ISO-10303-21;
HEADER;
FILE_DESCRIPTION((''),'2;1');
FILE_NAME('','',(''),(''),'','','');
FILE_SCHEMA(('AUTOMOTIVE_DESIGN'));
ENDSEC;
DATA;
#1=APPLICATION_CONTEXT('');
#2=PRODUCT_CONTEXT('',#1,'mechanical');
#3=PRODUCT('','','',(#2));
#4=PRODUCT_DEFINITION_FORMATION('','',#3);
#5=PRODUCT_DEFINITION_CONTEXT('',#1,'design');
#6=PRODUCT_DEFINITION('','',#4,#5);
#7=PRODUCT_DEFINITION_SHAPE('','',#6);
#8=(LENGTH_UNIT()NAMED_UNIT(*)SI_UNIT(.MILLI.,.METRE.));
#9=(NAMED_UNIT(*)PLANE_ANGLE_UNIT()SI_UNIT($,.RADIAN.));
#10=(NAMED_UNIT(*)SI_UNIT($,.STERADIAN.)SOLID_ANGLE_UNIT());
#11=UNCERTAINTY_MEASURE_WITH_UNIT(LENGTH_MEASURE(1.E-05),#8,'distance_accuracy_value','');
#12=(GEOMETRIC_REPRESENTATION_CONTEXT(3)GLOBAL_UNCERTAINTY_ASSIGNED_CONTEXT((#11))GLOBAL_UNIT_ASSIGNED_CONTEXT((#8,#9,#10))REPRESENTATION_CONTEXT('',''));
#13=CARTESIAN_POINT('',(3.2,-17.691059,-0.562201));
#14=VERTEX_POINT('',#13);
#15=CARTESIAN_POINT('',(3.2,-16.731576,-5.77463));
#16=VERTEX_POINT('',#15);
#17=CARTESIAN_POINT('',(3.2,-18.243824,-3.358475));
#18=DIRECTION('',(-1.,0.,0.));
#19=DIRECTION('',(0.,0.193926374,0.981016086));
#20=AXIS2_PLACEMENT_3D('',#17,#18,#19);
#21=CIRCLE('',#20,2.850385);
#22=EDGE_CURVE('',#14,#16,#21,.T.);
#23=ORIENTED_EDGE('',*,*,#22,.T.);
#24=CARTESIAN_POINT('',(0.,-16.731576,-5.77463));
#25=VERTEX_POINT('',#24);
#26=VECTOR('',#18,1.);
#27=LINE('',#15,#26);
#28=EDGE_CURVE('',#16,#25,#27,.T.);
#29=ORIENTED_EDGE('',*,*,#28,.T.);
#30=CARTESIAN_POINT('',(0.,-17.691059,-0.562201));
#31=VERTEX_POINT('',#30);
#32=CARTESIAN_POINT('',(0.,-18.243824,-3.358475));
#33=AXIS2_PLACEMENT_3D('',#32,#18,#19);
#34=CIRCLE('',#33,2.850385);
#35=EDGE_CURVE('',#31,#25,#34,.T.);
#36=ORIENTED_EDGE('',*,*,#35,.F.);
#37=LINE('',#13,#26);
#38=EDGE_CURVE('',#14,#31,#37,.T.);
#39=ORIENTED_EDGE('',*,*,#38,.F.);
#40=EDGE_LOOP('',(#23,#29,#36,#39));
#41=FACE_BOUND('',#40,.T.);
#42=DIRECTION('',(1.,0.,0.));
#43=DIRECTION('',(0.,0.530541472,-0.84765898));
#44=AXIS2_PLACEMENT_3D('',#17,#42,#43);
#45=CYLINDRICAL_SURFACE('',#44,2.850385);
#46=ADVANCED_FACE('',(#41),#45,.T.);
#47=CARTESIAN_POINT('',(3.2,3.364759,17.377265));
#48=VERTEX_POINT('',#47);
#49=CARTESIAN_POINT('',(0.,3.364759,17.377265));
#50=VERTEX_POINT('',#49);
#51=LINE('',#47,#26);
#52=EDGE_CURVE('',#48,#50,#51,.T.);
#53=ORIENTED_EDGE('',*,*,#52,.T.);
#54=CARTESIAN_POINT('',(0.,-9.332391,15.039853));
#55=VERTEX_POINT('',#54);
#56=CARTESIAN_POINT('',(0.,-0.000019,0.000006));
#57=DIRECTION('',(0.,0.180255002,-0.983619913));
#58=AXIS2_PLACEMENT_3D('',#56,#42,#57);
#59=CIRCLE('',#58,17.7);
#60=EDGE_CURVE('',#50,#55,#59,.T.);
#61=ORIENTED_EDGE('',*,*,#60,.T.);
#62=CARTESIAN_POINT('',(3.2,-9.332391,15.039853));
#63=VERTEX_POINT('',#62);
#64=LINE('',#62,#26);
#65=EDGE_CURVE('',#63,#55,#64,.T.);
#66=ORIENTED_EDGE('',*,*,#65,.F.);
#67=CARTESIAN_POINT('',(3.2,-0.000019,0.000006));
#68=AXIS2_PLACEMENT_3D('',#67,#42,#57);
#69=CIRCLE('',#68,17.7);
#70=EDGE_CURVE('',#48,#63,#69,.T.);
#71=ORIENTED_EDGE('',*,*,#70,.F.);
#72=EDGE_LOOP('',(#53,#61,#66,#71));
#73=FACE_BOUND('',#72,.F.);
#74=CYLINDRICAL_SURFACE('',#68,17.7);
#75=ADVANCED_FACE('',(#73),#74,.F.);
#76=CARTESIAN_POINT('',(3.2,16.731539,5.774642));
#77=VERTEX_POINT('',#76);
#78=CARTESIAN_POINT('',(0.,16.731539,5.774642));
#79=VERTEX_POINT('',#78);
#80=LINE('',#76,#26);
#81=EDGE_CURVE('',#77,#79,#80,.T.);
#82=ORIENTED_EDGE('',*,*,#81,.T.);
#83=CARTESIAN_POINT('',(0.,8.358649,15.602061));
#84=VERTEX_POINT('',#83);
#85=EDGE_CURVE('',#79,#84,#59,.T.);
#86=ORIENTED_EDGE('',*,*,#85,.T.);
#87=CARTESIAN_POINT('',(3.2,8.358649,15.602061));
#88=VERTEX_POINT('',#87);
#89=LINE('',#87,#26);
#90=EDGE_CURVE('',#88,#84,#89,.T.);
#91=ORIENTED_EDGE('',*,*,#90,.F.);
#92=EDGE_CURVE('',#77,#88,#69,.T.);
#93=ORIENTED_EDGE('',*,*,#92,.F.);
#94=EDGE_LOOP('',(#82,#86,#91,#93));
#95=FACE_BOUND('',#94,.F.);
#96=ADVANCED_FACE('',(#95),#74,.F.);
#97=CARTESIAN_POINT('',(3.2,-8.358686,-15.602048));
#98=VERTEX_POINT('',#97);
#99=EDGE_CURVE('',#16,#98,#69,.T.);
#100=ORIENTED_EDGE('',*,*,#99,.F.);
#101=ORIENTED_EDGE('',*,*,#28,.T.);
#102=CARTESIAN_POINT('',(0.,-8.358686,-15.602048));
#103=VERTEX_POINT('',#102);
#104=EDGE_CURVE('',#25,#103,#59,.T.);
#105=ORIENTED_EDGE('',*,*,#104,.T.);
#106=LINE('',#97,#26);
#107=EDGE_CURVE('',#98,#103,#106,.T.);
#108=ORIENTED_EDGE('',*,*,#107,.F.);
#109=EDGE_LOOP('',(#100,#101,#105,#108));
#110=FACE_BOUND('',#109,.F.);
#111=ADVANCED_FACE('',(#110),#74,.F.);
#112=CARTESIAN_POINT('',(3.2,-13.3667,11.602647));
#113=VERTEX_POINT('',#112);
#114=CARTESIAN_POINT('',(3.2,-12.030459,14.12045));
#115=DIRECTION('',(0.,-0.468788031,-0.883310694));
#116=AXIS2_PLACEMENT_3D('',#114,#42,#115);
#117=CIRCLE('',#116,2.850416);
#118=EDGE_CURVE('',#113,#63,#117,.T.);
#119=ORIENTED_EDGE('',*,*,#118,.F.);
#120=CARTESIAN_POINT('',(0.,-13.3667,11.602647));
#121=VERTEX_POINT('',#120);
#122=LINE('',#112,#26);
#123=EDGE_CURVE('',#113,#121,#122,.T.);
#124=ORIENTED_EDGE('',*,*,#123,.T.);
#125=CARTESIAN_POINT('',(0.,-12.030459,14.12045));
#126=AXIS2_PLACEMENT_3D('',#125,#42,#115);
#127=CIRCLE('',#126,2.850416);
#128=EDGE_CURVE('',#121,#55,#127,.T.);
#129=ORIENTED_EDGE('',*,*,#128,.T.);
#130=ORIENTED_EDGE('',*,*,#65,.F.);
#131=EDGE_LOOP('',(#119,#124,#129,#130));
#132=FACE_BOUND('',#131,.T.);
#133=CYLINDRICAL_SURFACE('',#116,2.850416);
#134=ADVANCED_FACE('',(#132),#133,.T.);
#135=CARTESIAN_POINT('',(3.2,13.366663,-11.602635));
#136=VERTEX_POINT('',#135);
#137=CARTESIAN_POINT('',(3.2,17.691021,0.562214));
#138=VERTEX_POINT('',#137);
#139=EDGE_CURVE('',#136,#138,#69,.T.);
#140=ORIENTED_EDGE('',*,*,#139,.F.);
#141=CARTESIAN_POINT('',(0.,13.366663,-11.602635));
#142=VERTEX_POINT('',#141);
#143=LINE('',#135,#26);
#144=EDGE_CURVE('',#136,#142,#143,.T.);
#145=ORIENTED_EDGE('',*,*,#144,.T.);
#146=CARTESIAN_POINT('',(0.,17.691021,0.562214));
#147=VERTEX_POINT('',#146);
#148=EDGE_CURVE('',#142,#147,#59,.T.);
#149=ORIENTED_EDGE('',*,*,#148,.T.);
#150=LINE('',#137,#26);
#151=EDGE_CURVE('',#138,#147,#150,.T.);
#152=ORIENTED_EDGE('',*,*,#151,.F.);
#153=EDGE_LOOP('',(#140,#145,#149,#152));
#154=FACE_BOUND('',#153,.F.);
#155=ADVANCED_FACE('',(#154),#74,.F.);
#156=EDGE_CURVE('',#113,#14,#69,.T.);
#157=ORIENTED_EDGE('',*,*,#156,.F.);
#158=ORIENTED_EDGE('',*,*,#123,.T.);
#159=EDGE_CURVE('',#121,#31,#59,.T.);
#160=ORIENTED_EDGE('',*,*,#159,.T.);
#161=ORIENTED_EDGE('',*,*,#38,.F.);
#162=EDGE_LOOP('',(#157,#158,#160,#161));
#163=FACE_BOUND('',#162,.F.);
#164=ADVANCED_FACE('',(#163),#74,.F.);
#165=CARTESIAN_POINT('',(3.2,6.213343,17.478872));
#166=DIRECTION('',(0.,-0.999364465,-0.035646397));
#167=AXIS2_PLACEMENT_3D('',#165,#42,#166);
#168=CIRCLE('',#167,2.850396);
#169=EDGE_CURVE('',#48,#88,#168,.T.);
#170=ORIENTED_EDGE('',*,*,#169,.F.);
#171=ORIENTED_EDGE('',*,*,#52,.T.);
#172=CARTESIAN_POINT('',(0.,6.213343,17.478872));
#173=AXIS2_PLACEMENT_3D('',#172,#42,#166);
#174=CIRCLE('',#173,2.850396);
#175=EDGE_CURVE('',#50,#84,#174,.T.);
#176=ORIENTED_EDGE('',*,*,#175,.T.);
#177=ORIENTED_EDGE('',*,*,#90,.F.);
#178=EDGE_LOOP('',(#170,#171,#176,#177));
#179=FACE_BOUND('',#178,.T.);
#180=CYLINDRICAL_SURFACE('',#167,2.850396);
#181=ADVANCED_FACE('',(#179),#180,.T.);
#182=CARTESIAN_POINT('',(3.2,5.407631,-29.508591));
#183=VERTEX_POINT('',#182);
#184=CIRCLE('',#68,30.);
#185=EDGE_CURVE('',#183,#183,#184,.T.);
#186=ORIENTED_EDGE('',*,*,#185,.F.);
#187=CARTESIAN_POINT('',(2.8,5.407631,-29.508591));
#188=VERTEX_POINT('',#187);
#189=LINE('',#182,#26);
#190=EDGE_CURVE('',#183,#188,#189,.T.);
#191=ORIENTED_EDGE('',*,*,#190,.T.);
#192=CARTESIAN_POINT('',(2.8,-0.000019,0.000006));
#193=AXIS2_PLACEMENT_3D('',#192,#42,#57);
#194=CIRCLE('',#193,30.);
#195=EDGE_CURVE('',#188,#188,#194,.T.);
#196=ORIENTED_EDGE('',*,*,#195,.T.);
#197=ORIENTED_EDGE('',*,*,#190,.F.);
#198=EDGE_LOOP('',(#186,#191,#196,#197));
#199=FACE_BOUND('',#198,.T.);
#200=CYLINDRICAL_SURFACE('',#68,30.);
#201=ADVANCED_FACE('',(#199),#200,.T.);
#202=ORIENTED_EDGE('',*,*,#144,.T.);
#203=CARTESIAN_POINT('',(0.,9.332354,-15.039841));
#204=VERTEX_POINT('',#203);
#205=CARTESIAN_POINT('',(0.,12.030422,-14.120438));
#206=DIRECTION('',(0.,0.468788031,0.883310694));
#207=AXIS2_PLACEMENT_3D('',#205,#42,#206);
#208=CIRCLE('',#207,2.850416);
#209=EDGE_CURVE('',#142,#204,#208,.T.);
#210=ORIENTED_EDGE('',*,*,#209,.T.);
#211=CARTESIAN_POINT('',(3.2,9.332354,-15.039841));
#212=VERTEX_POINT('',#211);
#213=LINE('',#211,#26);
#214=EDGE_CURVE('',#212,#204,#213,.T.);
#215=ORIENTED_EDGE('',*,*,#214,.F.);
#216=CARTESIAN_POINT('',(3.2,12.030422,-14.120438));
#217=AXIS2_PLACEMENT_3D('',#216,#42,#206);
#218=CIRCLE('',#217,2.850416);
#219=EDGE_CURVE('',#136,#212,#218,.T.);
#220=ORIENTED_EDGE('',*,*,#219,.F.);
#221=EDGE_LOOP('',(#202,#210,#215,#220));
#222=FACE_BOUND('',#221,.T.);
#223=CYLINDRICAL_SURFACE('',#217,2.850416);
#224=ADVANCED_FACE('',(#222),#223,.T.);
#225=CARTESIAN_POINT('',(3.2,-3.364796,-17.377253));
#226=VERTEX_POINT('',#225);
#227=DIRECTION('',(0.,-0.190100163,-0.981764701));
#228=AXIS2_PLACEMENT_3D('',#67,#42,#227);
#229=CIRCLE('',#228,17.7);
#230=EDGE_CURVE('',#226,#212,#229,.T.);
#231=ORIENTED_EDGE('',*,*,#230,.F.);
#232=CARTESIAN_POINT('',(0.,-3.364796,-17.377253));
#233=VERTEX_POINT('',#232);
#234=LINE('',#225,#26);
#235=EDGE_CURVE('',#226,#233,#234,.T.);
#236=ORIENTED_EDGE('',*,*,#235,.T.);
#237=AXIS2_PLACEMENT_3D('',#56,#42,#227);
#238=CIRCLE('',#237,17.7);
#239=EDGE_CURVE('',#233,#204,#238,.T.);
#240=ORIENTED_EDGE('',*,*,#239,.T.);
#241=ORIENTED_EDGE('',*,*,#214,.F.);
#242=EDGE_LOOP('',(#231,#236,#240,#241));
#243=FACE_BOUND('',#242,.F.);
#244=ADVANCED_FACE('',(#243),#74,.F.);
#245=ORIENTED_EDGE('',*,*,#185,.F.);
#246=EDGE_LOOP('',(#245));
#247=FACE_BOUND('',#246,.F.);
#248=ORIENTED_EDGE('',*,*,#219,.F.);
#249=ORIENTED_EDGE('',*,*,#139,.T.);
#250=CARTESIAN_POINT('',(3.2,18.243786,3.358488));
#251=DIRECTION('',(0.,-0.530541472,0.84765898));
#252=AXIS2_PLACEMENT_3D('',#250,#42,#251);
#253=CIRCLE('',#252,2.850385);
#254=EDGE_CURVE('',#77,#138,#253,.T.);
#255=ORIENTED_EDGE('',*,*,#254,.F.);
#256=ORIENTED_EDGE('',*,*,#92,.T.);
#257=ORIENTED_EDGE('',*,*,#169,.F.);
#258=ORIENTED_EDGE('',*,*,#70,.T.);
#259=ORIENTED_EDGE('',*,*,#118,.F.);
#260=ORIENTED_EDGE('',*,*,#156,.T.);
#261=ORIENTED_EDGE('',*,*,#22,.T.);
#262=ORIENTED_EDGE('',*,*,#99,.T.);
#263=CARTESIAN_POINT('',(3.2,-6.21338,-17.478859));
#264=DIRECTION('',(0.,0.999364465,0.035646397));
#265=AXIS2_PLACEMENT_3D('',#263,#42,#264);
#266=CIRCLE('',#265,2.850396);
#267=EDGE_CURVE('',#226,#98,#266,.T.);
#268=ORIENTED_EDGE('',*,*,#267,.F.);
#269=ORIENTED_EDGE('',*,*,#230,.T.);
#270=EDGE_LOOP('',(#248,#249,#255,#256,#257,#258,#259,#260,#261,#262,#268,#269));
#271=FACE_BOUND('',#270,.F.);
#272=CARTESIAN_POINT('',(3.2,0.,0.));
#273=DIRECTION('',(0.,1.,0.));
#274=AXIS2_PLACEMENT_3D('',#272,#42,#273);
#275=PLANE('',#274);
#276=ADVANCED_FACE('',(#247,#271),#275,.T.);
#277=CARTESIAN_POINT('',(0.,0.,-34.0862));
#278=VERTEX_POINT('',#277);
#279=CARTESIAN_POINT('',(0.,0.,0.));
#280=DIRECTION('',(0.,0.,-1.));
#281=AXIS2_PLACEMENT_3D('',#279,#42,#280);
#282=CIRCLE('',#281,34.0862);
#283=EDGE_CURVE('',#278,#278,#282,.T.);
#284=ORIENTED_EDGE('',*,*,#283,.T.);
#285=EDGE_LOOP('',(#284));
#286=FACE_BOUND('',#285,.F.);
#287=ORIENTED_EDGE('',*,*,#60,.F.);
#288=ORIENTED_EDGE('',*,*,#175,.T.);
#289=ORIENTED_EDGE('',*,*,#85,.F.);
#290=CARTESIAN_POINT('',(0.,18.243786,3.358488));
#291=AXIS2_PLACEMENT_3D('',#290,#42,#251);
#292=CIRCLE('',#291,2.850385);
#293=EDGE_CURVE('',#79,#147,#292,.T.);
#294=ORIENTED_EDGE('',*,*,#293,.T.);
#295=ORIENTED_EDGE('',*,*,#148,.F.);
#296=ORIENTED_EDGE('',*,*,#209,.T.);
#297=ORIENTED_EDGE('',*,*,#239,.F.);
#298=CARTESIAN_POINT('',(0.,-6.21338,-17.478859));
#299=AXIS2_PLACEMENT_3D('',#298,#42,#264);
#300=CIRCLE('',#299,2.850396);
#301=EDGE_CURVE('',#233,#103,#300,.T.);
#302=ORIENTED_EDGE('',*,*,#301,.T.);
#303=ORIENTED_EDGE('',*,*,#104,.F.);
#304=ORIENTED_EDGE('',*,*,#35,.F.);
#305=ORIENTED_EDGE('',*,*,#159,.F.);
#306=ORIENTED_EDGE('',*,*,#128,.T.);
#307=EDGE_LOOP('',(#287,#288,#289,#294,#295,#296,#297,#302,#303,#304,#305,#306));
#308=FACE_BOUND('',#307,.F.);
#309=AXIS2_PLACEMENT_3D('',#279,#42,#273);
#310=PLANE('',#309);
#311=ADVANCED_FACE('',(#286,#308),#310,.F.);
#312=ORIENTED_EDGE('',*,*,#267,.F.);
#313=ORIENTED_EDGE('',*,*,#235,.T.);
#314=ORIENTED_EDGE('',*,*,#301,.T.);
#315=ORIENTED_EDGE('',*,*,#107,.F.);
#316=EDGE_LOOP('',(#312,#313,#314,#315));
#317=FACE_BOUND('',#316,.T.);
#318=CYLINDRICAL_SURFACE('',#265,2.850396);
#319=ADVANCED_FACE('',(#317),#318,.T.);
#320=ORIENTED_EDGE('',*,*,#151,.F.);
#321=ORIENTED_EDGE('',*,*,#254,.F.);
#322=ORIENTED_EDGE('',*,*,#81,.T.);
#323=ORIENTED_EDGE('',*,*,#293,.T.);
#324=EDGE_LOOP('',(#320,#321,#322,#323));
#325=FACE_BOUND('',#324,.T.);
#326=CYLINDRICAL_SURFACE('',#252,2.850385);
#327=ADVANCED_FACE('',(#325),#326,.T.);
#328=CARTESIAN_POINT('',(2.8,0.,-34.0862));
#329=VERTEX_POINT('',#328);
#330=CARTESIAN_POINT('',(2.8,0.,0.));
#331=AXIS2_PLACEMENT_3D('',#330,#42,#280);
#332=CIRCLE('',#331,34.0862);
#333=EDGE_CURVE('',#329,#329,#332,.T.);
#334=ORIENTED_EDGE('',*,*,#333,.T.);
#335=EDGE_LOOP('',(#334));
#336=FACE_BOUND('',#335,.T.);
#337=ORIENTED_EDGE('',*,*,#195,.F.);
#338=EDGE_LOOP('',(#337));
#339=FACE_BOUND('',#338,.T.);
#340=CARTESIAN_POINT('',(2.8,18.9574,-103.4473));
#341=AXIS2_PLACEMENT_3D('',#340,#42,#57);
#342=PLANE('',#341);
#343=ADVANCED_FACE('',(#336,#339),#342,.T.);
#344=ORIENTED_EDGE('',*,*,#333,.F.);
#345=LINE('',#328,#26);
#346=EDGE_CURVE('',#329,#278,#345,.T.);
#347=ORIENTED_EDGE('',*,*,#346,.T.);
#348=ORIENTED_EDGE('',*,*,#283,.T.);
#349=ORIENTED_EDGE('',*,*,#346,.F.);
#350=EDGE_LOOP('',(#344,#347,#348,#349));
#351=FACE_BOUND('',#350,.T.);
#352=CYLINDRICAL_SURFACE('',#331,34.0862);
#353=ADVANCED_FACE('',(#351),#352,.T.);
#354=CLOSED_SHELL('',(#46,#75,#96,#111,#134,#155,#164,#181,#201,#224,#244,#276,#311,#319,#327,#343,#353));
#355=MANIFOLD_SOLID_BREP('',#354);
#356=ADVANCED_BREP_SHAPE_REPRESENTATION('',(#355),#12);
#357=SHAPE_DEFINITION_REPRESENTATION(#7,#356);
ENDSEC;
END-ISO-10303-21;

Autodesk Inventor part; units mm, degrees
ref_plane "YZ Plane" through (0, 0, 0) normal (1, 0, 0) x (0, 1, 0)
ref_plane "XZ Plane" through (0, 0, 0) normal (0, 1, 0) x (-1, 0, 0)
ref_plane "XY Plane" through (0, 0, 0) normal (0, 0, 1) x (1, 0, 0)
sketch "Sketch_1" plane through (0, 0, 0) normal (0, 0, 1) x (1, 0, 0)
  line L0 (7.2, 0) -> (0, 0)
  line L1 (0, 8.5) -> (3.2, 8.5)
  line L2 (3.2, 8.5) -> (3.2, 105.8394)
  arc A0 (3.2, 105.8394) -> (2.2899, 109) centre (-4.7294, 105.2675) ccw
  line L3 (2.2899, 109) -> (0.7899, 109)
  arc A1 (0.7899, 109) -> (0, 105.8394) centre (7.9441, 105.5329) ccw
  line L4 (0, 105.8394) -> (0, 8.5)
  dimension "d16" = 1.5
  dimension "d17" = 3.2
revolve "Revolution1" add sketch "Sketch_1" angle 360 about axis through (7.2, 0, 0) along (1, 0, 0)
sketch "Sketch_2" plane through (3.6, 0, 0) normal (1, 0, 0) x (0, 0, -1)
  circle A0 centre (0, 0) radius 145.3333
  arc A1 (-108.9989, 0.5) -> (-108.9989, -0.5) centre (0, 0) ccw
  line L0 (-108.9989, -0.5) -> (-103.5248, -2.6502)
  arc A2 (-103.0895, -9.8477) -> (-103.5248, -2.6502) centre (-104.9781, -6.35) ccw
  line L1 (-103.0895, -9.8477) -> (-108.2644, -12.642)
  arc A3 (-108.2644, -12.642) -> (-108.1439, -13.6347) centre (0, 0) ccw
  line L2 (-108.1439, -13.6347) -> (-102.4506, -15.1094)
  arc A4 (-101.1508, -22.2019) -> (-102.4506, -15.1094) centre (-103.4473, -18.9574) ccw
  line L3 (-101.1508, -22.2019) -> (-105.9512, -25.5997)
  arc A5 (-105.9512, -25.5997) -> (-105.7119, -26.5706) centre (0, 0) ccw
  line L4 (-105.7119, -26.5706) -> (-99.8824, -27.3483)
  arc A6 (-97.7372, -34.2324) -> (-99.8824, -27.3483) centre (-100.408, -31.2884) ccw
  line L5 (-97.7372, -34.2324) -> (-102.093, -38.184)
  arc A7 (-102.093, -38.184) -> (-101.7384, -39.119) centre (0, 0) ccw
  line L6 (-101.7384, -39.119) -> (-95.8576, -39.1884)
  arc A8 (-92.8983, -45.7638) -> (-95.8576, -39.1884) centre (-95.9045, -43.1631) ccw
  line L7 (-92.8983, -45.7638) -> (-96.7461, -50.2116)
  arc A9 (-96.7461, -50.2116) -> (-96.2813, -51.097) centre (0, 0) ccw
  line L8 (-96.2813, -51.097) -> (-90.4351, -50.457)
  arc A10 (-86.7048, -56.6277) -> (-90.4351, -50.457) centre (-90.0025, -54.4084) ccw
  line L9 (-86.7048, -56.6277) -> (-89.9883, -61.5069)
  arc A11 (-89.9883, -61.5069) -> (-89.4203, -62.3299) centre (0, 0) ccw
  line L10 (-89.4203, -62.3299) -> (-83.6938, -60.9899)
  arc A12 (-79.2469, -66.666) -> (-83.6938, -60.9899) centre (-82.7881, -64.8603) ccw
  line L11 (-79.2469, -66.666) -> (-81.9184, -71.9054)
  arc A13 (-81.9184, -71.9054) -> (-81.2553, -72.6539) centre (0, 0) ccw
  line L12 (-81.2553, -72.6539) -> (-75.732, -70.6334)
  arc A14 (-70.6334, -75.732) -> (-75.732, -70.6334) centre (-74.3664, -74.3664) ccw
  line L13 (-70.6334, -75.732) -> (-72.6539, -81.2553)
  arc A15 (-72.6539, -81.2553) -> (-71.9054, -81.9184) centre (0, 0) ccw
  line L14 (-71.9054, -81.9184) -> (-66.666, -79.2469)
  arc A16 (-60.9899, -83.6938) -> (-66.666, -79.2469) centre (-64.8603, -82.7881) ccw
  line L15 (-60.9899, -83.6938) -> (-62.3299, -89.4203)
  arc A17 (-62.3299, -89.4203) -> (-61.5069, -89.9883) centre (0, 0) ccw
  line L16 (-61.5069, -89.9883) -> (-56.6277, -86.7048)
  arc A18 (-50.457, -90.4351) -> (-56.6277, -86.7048) centre (-54.4084, -90.0025) ccw
  line L17 (-50.457, -90.4351) -> (-51.097, -96.2813)
  arc A19 (-51.097, -96.2813) -> (-50.2116, -96.7461) centre (0, 0) ccw
  line L18 (-50.2116, -96.7461) -> (-45.7638, -92.8983)
  arc A20 (-39.1884, -95.8576) -> (-45.7638, -92.8983) centre (-43.1631, -95.9045) ccw
  line L19 (-39.1884, -95.8576) -> (-39.119, -101.7384)
  arc A21 (-39.119, -101.7384) -> (-38.184, -102.093) centre (0, 0) ccw
  line L20 (-38.184, -102.093) -> (-34.2324, -97.7372)
  arc A22 (-27.3483, -99.8824) -> (-34.2324, -97.7372) centre (-31.2884, -100.408) ccw
  line L21 (-27.3483, -99.8824) -> (-26.5706, -105.7119)
  arc A23 (-26.5706, -105.7119) -> (-25.5997, -105.9512) centre (0, 0) ccw
  line L22 (-25.5997, -105.9512) -> (-22.2019, -101.1508)
  arc A24 (-15.1094, -102.4506) -> (-22.2019, -101.1508) centre (-18.9574, -103.4473) ccw
  line L23 (-15.1094, -102.4506) -> (-13.6347, -108.1439)
  arc A25 (-13.6347, -108.1439) -> (-12.642, -108.2644) centre (0, 0) ccw
  line L24 (-12.642, -108.2644) -> (-9.8477, -103.0895)
  arc A26 (-2.6502, -103.5248) -> (-9.8477, -103.0895) centre (-6.35, -104.9781) ccw
  line L25 (-2.6502, -103.5248) -> (-0.5, -108.9989)
  arc A27 (-0.5, -108.9989) -> (0.5, -108.9989) centre (0, 0) ccw
  line L26 (0.5, -108.9989) -> (2.6502, -103.5248)
  arc A28 (9.8477, -103.0895) -> (2.6502, -103.5248) centre (6.35, -104.9781) ccw
  line L27 (9.8477, -103.0895) -> (12.642, -108.2644)
  arc A29 (12.642, -108.2644) -> (13.6347, -108.1439) centre (0, 0) ccw
  line L28 (13.6347, -108.1439) -> (15.1094, -102.4506)
  arc A30 (22.2019, -101.1508) -> (15.1094, -102.4506) centre (18.9574, -103.4473) ccw
  line L29 (22.2019, -101.1508) -> (25.5997, -105.9512)
  arc A31 (25.5997, -105.9512) -> (26.5706, -105.7119) centre (0, 0) ccw
  line L30 (26.5706, -105.7119) -> (27.3483, -99.8824)
  arc A32 (34.2324, -97.7372) -> (27.3483, -99.8824) centre (31.2884, -100.408) ccw
  line L31 (34.2324, -97.7372) -> (38.184, -102.093)
  arc A33 (38.184, -102.093) -> (39.119, -101.7384) centre (0, 0) ccw
  line L32 (39.119, -101.7384) -> (39.1884, -95.8576)
  arc A34 (45.7638, -92.8983) -> (39.1884, -95.8576) centre (43.1631, -95.9045) ccw
  line L33 (45.7638, -92.8983) -> (50.2116, -96.7461)
  arc A35 (50.2116, -96.7461) -> (51.097, -96.2813) centre (0, 0) ccw
  line L34 (51.097, -96.2813) -> (50.457, -90.4351)
  arc A36 (56.6277, -86.7048) -> (50.457, -90.4351) centre (54.4084, -90.0025) ccw
  line L35 (56.6277, -86.7048) -> (61.5069, -89.9883)
  arc A37 (61.5069, -89.9883) -> (62.3299, -89.4203) centre (0, 0) ccw
  line L36 (62.3299, -89.4203) -> (60.9899, -83.6938)
  arc A38 (66.666, -79.2469) -> (60.9899, -83.6938) centre (64.8603, -82.7881) ccw
  line L37 (66.666, -79.2469) -> (71.9054, -81.9184)
  arc A39 (71.9054, -81.9184) -> (72.6539, -81.2553) centre (0, 0) ccw
  line L38 (72.6539, -81.2553) -> (70.6334, -75.732)
  arc A40 (75.732, -70.6334) -> (70.6334, -75.732) centre (74.3664, -74.3664) ccw
  line L39 (75.732, -70.6334) -> (81.2553, -72.6539)
  arc A41 (81.2553, -72.6539) -> (81.9184, -71.9054) centre (0, 0) ccw
  line L40 (81.9184, -71.9054) -> (79.2469, -66.666)
  arc A42 (83.6938, -60.9899) -> (79.2469, -66.666) centre (82.7881, -64.8603) ccw
  line L41 (83.6938, -60.9899) -> (89.4203, -62.3299)
  arc A43 (89.4203, -62.3299) -> (89.9883, -61.5069) centre (0, 0) ccw
  line L42 (89.9883, -61.5069) -> (86.7048, -56.6277)
  arc A44 (90.4351, -50.457) -> (86.7048, -56.6277) centre (90.0025, -54.4084) ccw
  line L43 (90.4351, -50.457) -> (96.2813, -51.097)
  arc A45 (96.2813, -51.097) -> (96.7461, -50.2116) centre (0, 0) ccw
  line L44 (96.7461, -50.2116) -> (92.8983, -45.7638)
  arc A46 (95.8576, -39.1884) -> (92.8983, -45.7638) centre (95.9045, -43.1631) ccw
  line L45 (95.8576, -39.1884) -> (101.7384, -39.119)
  arc A47 (101.7384, -39.119) -> (102.093, -38.184) centre (0, 0) ccw
  line L46 (102.093, -38.184) -> (97.7372, -34.2324)
  arc A48 (99.8824, -27.3483) -> (97.7372, -34.2324) centre (100.408, -31.2884) ccw
  line L47 (99.8824, -27.3483) -> (105.7119, -26.5706)
  arc A49 (105.7119, -26.5706) -> (105.9512, -25.5997) centre (0, 0) ccw
  line L48 (105.9512, -25.5997) -> (101.1508, -22.2019)
  arc A50 (102.4506, -15.1094) -> (101.1508, -22.2019) centre (103.4473, -18.9574) ccw
  line L49 (102.4506, -15.1094) -> (108.1439, -13.6347)
  arc A51 (108.1439, -13.6347) -> (108.2644, -12.642) centre (0, 0) ccw
  line L50 (108.2644, -12.642) -> (103.0895, -9.8477)
  arc A52 (103.5248, -2.6502) -> (103.0895, -9.8477) centre (104.9781, -6.35) ccw
  line L51 (103.5248, -2.6502) -> (108.9989, -0.5)
  arc A53 (108.9989, -0.5) -> (108.9989, 0.5) centre (0, 0) ccw
  line L52 (108.9989, 0.5) -> (103.5248, 2.6502)
  arc A54 (103.0895, 9.8477) -> (103.5248, 2.6502) centre (104.9781, 6.35) ccw
  line L53 (103.0895, 9.8477) -> (108.2644, 12.642)
  arc A55 (108.2644, 12.642) -> (108.1439, 13.6347) centre (0, 0) ccw
  line L54 (108.1439, 13.6347) -> (102.4506, 15.1094)
  arc A56 (101.1508, 22.2019) -> (102.4506, 15.1094) centre (103.4473, 18.9574) ccw
  line L55 (101.1508, 22.2019) -> (105.9512, 25.5997)
  arc A57 (105.9512, 25.5997) -> (105.7119, 26.5706) centre (0, 0) ccw
  line L56 (105.7119, 26.5706) -> (99.8824, 27.3483)
  arc A58 (97.7372, 34.2324) -> (99.8824, 27.3483) centre (100.408, 31.2884) ccw
  line L57 (97.7372, 34.2324) -> (102.093, 38.184)
  arc A59 (102.093, 38.184) -> (101.7384, 39.119) centre (0, 0) ccw
  line L58 (101.7384, 39.119) -> (95.8576, 39.1884)
  arc A60 (92.8983, 45.7638) -> (95.8576, 39.1884) centre (95.9045, 43.1631) ccw
  line L59 (92.8983, 45.7638) -> (96.7461, 50.2116)
  arc A61 (96.7461, 50.2116) -> (96.2813, 51.097) centre (0, 0) ccw
  line L60 (96.2813, 51.097) -> (90.4351, 50.457)
  arc A62 (86.7048, 56.6277) -> (90.4351, 50.457) centre (90.0025, 54.4084) ccw
  line L61 (86.7048, 56.6277) -> (89.9883, 61.5069)
  arc A63 (89.9883, 61.5069) -> (89.4203, 62.3299) centre (0, 0) ccw
  line L62 (89.4203, 62.3299) -> (83.6938, 60.9899)
  arc A64 (79.2469, 66.666) -> (83.6938, 60.9899) centre (82.7881, 64.8603) ccw
  line L63 (79.2469, 66.666) -> (81.9184, 71.9054)
  arc A65 (81.9184, 71.9054) -> (81.2553, 72.6539) centre (0, 0) ccw
  line L64 (81.2553, 72.6539) -> (75.732, 70.6334)
  arc A66 (70.6334, 75.732) -> (75.732, 70.6334) centre (74.3664, 74.3664) ccw
  line L65 (70.6334, 75.732) -> (72.6539, 81.2553)
  arc A67 (72.6539, 81.2553) -> (71.9054, 81.9184) centre (0, 0) ccw
  line L66 (71.9054, 81.9184) -> (66.666, 79.2469)
  arc A68 (60.9899, 83.6938) -> (66.666, 79.2469) centre (64.8603, 82.7881) ccw
  line L67 (60.9899, 83.6938) -> (62.3299, 89.4203)
  arc A69 (62.3299, 89.4203) -> (61.5069, 89.9883) centre (0, 0) ccw
  line L68 (61.5069, 89.9883) -> (56.6277, 86.7048)
  arc A70 (50.457, 90.4351) -> (56.6277, 86.7048) centre (54.4084, 90.0025) ccw
  line L69 (50.457, 90.4351) -> (51.097, 96.2813)
  arc A71 (51.097, 96.2813) -> (50.2116, 96.7461) centre (0, 0) ccw
  line L70 (50.2116, 96.7461) -> (45.7638, 92.8983)
  arc A72 (39.1884, 95.8576) -> (45.7638, 92.8983) centre (43.1631, 95.9045) ccw
  line L71 (39.1884, 95.8576) -> (39.119, 101.7384)
  arc A73 (39.119, 101.7384) -> (38.184, 102.093) centre (0, 0) ccw
  line L72 (38.184, 102.093) -> (34.2324, 97.7372)
  arc A74 (27.3483, 99.8824) -> (34.2324, 97.7372) centre (31.2884, 100.408) ccw
  line L73 (27.3483, 99.8824) -> (26.5706, 105.7119)
  arc A75 (26.5706, 105.7119) -> (25.5997, 105.9512) centre (0, 0) ccw
  line L74 (25.5997, 105.9512) -> (22.2019, 101.1508)
  arc A76 (15.1094, 102.4506) -> (22.2019, 101.1508) centre (18.9574, 103.4473) ccw
  line L75 (15.1094, 102.4506) -> (13.6347, 108.1439)
  arc A77 (13.6347, 108.1439) -> (12.642, 108.2644) centre (0, 0) ccw
  line L76 (12.642, 108.2644) -> (9.8477, 103.0895)
  arc A78 (2.6502, 103.5248) -> (9.8477, 103.0895) centre (6.35, 104.9781) ccw
  line L77 (2.6502, 103.5248) -> (0.5, 108.9989)
  arc A79 (0.5, 108.9989) -> (-0.5, 108.9989) centre (0, 0) ccw
  line L78 (-0.5, 108.9989) -> (-2.6502, 103.5248)
  arc A80 (-9.8477, 103.0895) -> (-2.6502, 103.5248) centre (-6.35, 104.9781) ccw
  line L79 (-9.8477, 103.0895) -> (-12.642, 108.2644)
  arc A81 (-12.642, 108.2644) -> (-13.6347, 108.1439) centre (0, 0) ccw
  line L80 (-13.6347, 108.1439) -> (-15.1094, 102.4506)
  arc A82 (-22.2019, 101.1508) -> (-15.1094, 102.4506) centre (-18.9574, 103.4473) ccw
  line L81 (-22.2019, 101.1508) -> (-25.5997, 105.9512)
  arc A83 (-25.5997, 105.9512) -> (-26.5706, 105.7119) centre (0, 0) ccw
  line L82 (-26.5706, 105.7119) -> (-27.3483, 99.8824)
  arc A84 (-34.2324, 97.7372) -> (-27.3483, 99.8824) centre (-31.2884, 100.408) ccw
  line L83 (-34.2324, 97.7372) -> (-38.184, 102.093)
  arc A85 (-38.184, 102.093) -> (-39.119, 101.7384) centre (0, 0) ccw
  line L84 (-39.119, 101.7384) -> (-39.1884, 95.8576)
  arc A86 (-45.7638, 92.8983) -> (-39.1884, 95.8576) centre (-43.1631, 95.9045) ccw
  line L85 (-45.7638, 92.8983) -> (-50.2116, 96.7461)
  arc A87 (-50.2116, 96.7461) -> (-51.097, 96.2813) centre (0, 0) ccw
  line L86 (-51.097, 96.2813) -> (-50.457, 90.4351)
  arc A88 (-56.6277, 86.7048) -> (-50.457, 90.4351) centre (-54.4084, 90.0025) ccw
  line L87 (-56.6277, 86.7048) -> (-61.5069, 89.9883)
  arc A89 (-61.5069, 89.9883) -> (-62.3299, 89.4203) centre (0, 0) ccw
  line L88 (-62.3299, 89.4203) -> (-60.9899, 83.6938)
  arc A90 (-66.666, 79.2469) -> (-60.9899, 83.6938) centre (-64.8603, 82.7881) ccw
  line L89 (-66.666, 79.2469) -> (-71.9054, 81.9184)
  arc A91 (-71.9054, 81.9184) -> (-72.6539, 81.2553) centre (0, 0) ccw
  line L90 (-72.6539, 81.2553) -> (-70.6334, 75.732)
  arc A92 (-75.732, 70.6334) -> (-70.6334, 75.732) centre (-74.3664, 74.3664) ccw
  line L91 (-75.732, 70.6334) -> (-81.2553, 72.6539)
  arc A93 (-81.2553, 72.6539) -> (-81.9184, 71.9054) centre (0, 0) ccw
  line L92 (-81.9184, 71.9054) -> (-79.2469, 66.666)
  arc A94 (-83.6938, 60.9899) -> (-79.2469, 66.666) centre (-82.7881, 64.8603) ccw
  line L93 (-83.6938, 60.9899) -> (-89.4203, 62.3299)
  arc A95 (-89.4203, 62.3299) -> (-89.9883, 61.5069) centre (0, 0) ccw
  line L94 (-89.9883, 61.5069) -> (-86.7048, 56.6277)
  arc A96 (-90.4351, 50.457) -> (-86.7048, 56.6277) centre (-90.0025, 54.4084) ccw
  line L95 (-90.4351, 50.457) -> (-96.2813, 51.097)
  arc A97 (-96.2813, 51.097) -> (-96.7461, 50.2116) centre (0, 0) ccw
  line L96 (-96.7461, 50.2116) -> (-92.8983, 45.7638)
  arc A98 (-95.8576, 39.1884) -> (-92.8983, 45.7638) centre (-95.9045, 43.1631) ccw
  line L97 (-95.8576, 39.1884) -> (-101.7384, 39.119)
  arc A99 (-101.7384, 39.119) -> (-102.093, 38.184) centre (0, 0) ccw
  line L98 (-102.093, 38.184) -> (-97.7372, 34.2324)
  arc A100 (-99.8824, 27.3483) -> (-97.7372, 34.2324) centre (-100.408, 31.2884) ccw
  line L99 (-99.8824, 27.3483) -> (-105.7119, 26.5706)
  arc A101 (-105.7119, 26.5706) -> (-105.9512, 25.5997) centre (0, 0) ccw
  line L100 (-105.9512, 25.5997) -> (-101.1508, 22.2019)
  arc A102 (-102.4506, 15.1094) -> (-101.1508, 22.2019) centre (-103.4473, 18.9574) ccw
  line L101 (-102.4506, 15.1094) -> (-108.1439, 13.6347)
  arc A103 (-108.1439, 13.6347) -> (-108.2644, 12.642) centre (0, 0) ccw
  line L102 (-108.2644, 12.642) -> (-103.0895, 9.8477)
  arc A104 (-103.5248, 2.6502) -> (-103.0895, 9.8477) centre (-104.9781, 6.35) ccw
  line L103 (-103.5248, 2.6502) -> (-108.9989, 0.5)
extrude "Extrusion1" cut sketch "Sketch_2" along normal mid plane 7.6
sketch "スケッチ4" plane through (3.2, 18.9574, -103.4473) normal (1, 0, 0) x (0, 0.180255, -0.9836199)
  line L0 (-1.9941, -8.896) -> (0.3565, -8.1331) projected
  arc A0 (0.3565, -8.1331) -> (0.5674, -4.646) centre (-105.17, 0) ccw projected
  line L1 (0.5674, -4.646) -> (-1.674, -3.6053) projected
  arc A1 (-1.674, 3.6053) -> (-1.674, -3.6053) centre (0, 0) ccw projected
  line L2 (-1.674, 3.6053) -> (0.5674, 4.646) projected
  arc A2 (0.5674, 4.646) -> (0.3565, 8.1331) centre (-105.17, 0) ccw projected
  line L3 (0.3565, 8.1331) -> (-1.9941, 8.896) projected
  arc A3 (-2.8632, 16.0541) -> (-1.9941, 8.896) centre (-0.7668, 12.6768) ccw projected
  line L4 (-2.8632, 16.0541) -> (-0.7636, 17.3574) projected
  arc A4 (-0.7636, 17.3574) -> (-1.3933, 20.7936) centre (-105.17, 0) ccw projected
  line L5 (-1.3933, 20.7936) -> (-3.8186, 21.2677) projected
  arc A5 (-5.5442, 28.2688) -> (-3.8186, 21.2677) centre (-3.056, 25.1688) ccw projected
  line L6 (-5.5442, 28.2688) -> (-3.617, 29.8157) projected
  arc A6 (-3.617, 29.8157) -> (-4.6563, 33.1509) centre (-105.17, 0) ccw projected
  line L7 (-4.6563, 33.1509) -> (-7.1211, 33.3292) projected
  arc A7 (-9.678, 40.0712) -> (-7.1211, 33.3292) centre (-6.8343, 37.2938) ccw projected
  line L8 (-9.678, 40.0712) -> (-7.9513, 41.8391) projected
  arc A8 (-7.9513, 41.8391) -> (-9.3851, 45.0247) centre (-105.17, 0) ccw projected
  line L9 (-9.3851, 45.0247) -> (-11.8534, 44.9046) projected
  arc A9 (-15.2043, 51.2893) -> (-11.8534, 44.9046) centre (-12.0466, 48.8749) ccw projected
  line L10 (-15.2043, 51.2893) -> (-13.7033, 53.2525) projected
  arc A10 (-13.7033, 53.2525) -> (-15.5106, 56.2421) centre (-105.17, 0) ccw projected
  line L11 (-15.5106, 56.2421) -> (-17.9464, 55.8253) projected
  arc A11 (-22.0425, 61.7595) -> (-17.9464, 55.8253) centre (-18.6168, 59.7434) ccw projected
  line L12 (-22.0425, 61.7595) -> (-20.7891, 63.8893) projected
  arc A12 (-20.7891, 63.8893) -> (-22.9435, 66.6392) centre (-105.17, 0) ccw projected
  line L13 (-22.9435, 66.6392) -> (-25.3114, 65.9319) projected
  arc A13 (-30.0929, 71.3291) -> (-25.3114, 65.9319) centre (-26.4491, 69.7406) ccw projected
  line L14 (-30.0929, 71.3291) -> (-29.1053, 73.5945) projected
  arc A14 (-29.1053, 73.5945) -> (-31.5755, 76.0647) centre (-105.17, 0) ccw projected
  line L15 (-31.5755, 76.0647) -> (-33.8409, 75.0771) projected
  arc A15 (-39.2381, 79.8586) -> (-33.8409, 75.0771) centre (-35.4294, 78.7209) ccw projected
  line L16 (-39.2381, 79.8586) -> (-38.5308, 82.2265) projected
  arc A16 (-38.5308, 82.2265) -> (-41.2807, 84.3809) centre (-105.17, 0) ccw projected
  line L17 (-41.2807, 84.3809) -> (-43.4105, 83.1275) projected
  arc A17 (-49.3447, 87.2236) -> (-43.4105, 83.1275) centre (-45.4266, 86.5532) ccw projected
  line L18 (-49.3447, 87.2236) -> (-48.9279, 89.6594) projected
  arc A18 (-48.9279, 89.6594) -> (-51.9175, 91.4667) centre (-105.17, 0) ccw projected
  line L19 (-51.9175, 91.4667) -> (-53.8807, 89.9657) projected
  arc A19 (-60.2654, 93.3166) -> (-53.8807, 89.9657) centre (-56.2951, 93.1234) ccw projected
  line L20 (-60.2654, 93.3166) -> (-60.1453, 95.7849) projected
  arc A20 (-60.1453, 95.7849) -> (-63.3309, 97.2187) centre (-105.17, 0) ccw projected
  line L21 (-63.3309, 97.2187) -> (-65.0988, 95.492) projected
  arc A21 (-71.8408, 98.0489) -> (-65.0988, 95.492) centre (-67.8762, 98.3357) ccw projected
  line L22 (-71.8408, 98.0489) -> (-72.0191, 100.5137) projected
  arc A22 (-72.0191, 100.5137) -> (-75.3543, 101.553) centre (-105.17, 0) ccw projected
  line L23 (-75.3543, 101.553) -> (-76.9012, 99.6258) projected
  arc A23 (-83.9023, 101.3514) -> (-76.9012, 99.6258) centre (-80.0012, 102.114) ccw projected
  line L24 (-83.9023, 101.3514) -> (-84.3764, 103.7767) projected
  arc A24 (-84.3764, 103.7767) -> (-87.8126, 104.4064) centre (-105.17, 0) ccw projected
  line L25 (-87.8126, 104.4064) -> (-89.1159, 102.3068) projected
  arc A25 (-96.274, 103.1759) -> (-89.1159, 102.3068) centre (-92.4932, 104.4032) ccw projected
  line L26 (-96.274, 103.1759) -> (-97.0369, 105.5265) projected
  arc A26 (-97.0369, 105.5265) -> (-100.524, 105.7374) centre (-105.17, 0) ccw projected
  line L27 (-100.524, 105.7374) -> (-101.5647, 103.496) projected
  arc A27 (-108.7753, 103.496) -> (-101.5647, 103.496) centre (-105.17, 105.17) ccw projected
  line L28 (-108.7753, 103.496) -> (-109.816, 105.7374) projected
  arc A28 (-109.816, 105.7374) -> (-113.3031, 105.5265) centre (-105.17, 0) ccw projected
  line L29 (-113.3031, 105.5265) -> (-114.066, 103.1759) projected
  arc A29 (-121.2241, 102.3068) -> (-114.066, 103.1759) centre (-117.8468, 104.4032) ccw projected
  line L30 (-121.2241, 102.3068) -> (-122.5274, 104.4064) projected
  arc A30 (-122.5274, 104.4064) -> (-125.9636, 103.7767) centre (-105.17, 0) ccw projected
  line L31 (-125.9636, 103.7767) -> (-126.4377, 101.3514) projected
  arc A31 (-133.4388, 99.6258) -> (-126.4377, 101.3514) centre (-130.3388, 102.114) ccw projected
  line L32 (-133.4388, 99.6258) -> (-134.9857, 101.553) projected
  arc A32 (-134.9857, 101.553) -> (-138.3209, 100.5137) centre (-105.17, 0) ccw projected
  line L33 (-138.3209, 100.5137) -> (-138.4992, 98.0489) projected
  arc A33 (-145.2412, 95.492) -> (-138.4992, 98.0489) centre (-142.4638, 98.3357) ccw projected
  line L34 (-145.2412, 95.492) -> (-147.0091, 97.2187) projected
  arc A34 (-147.0091, 97.2187) -> (-150.1947, 95.7849) centre (-105.17, 0) ccw projected
  line L35 (-150.1947, 95.7849) -> (-150.0746, 93.3166) projected
  arc A35 (-156.4593, 89.9657) -> (-150.0746, 93.3166) centre (-154.0449, 93.1234) ccw projected
  line L36 (-156.4593, 89.9657) -> (-158.4225, 91.4667) projected
  arc A36 (-158.4225, 91.4667) -> (-161.4121, 89.6594) centre (-105.17, 0) ccw projected
  line L37 (-161.4121, 89.6594) -> (-160.9953, 87.2236) projected
  arc A37 (-166.9295, 83.1275) -> (-160.9953, 87.2236) centre (-164.9134, 86.5532) ccw projected
  line L38 (-166.9295, 83.1275) -> (-169.0593, 84.3809) projected
  arc A38 (-169.0593, 84.3809) -> (-171.8092, 82.2265) centre (-105.17, 0) ccw projected
  line L39 (-171.8092, 82.2265) -> (-171.1019, 79.8586) projected
  arc A39 (-176.4991, 75.0771) -> (-171.1019, 79.8586) centre (-174.9106, 78.7209) ccw projected
  line L40 (-176.4991, 75.0771) -> (-178.7645, 76.0647) projected
  arc A40 (-178.7645, 76.0647) -> (-181.2347, 73.5945) centre (-105.17, 0) ccw projected
  line L41 (-181.2347, 73.5945) -> (-180.2471, 71.3291) projected
  arc A41 (-185.0286, 65.9319) -> (-180.2471, 71.3291) centre (-183.8909, 69.7406) ccw projected
  line L42 (-185.0286, 65.9319) -> (-187.3965, 66.6392) projected
  arc A42 (-187.3965, 66.6392) -> (-189.5509, 63.8893) centre (-105.17, 0) ccw projected
  line L43 (-189.5509, 63.8893) -> (-188.2975, 61.7595) projected
  arc A43 (-192.3936, 55.8253) -> (-188.2975, 61.7595) centre (-191.7232, 59.7434) ccw projected
  line L44 (-192.3936, 55.8253) -> (-194.8294, 56.2421) projected
  arc A44 (-194.8294, 56.2421) -> (-196.6367, 53.2525) centre (-105.17, 0) ccw projected
  line L45 (-196.6367, 53.2525) -> (-195.1357, 51.2893) projected
  arc A45 (-198.4866, 44.9046) -> (-195.1357, 51.2893) centre (-198.2934, 48.8749) ccw projected
  line L46 (-198.4866, 44.9046) -> (-200.9549, 45.0247) projected
  arc A46 (-200.9549, 45.0247) -> (-202.3887, 41.8391) centre (-105.17, 0) ccw projected
  line L47 (-202.3887, 41.8391) -> (-200.662, 40.0712) projected
  arc A47 (-203.2189, 33.3292) -> (-200.662, 40.0712) centre (-203.5057, 37.2938) ccw projected
  line L48 (-203.2189, 33.3292) -> (-205.6837, 33.1509) projected
  arc A48 (-205.6837, 33.1509) -> (-206.723, 29.8157) centre (-105.17, 0) ccw projected
  line L49 (-206.723, 29.8157) -> (-204.7958, 28.2688) projected
  arc A49 (-206.5214, 21.2677) -> (-204.7958, 28.2688) centre (-207.284, 25.1688) ccw projected
  line L50 (-206.5214, 21.2677) -> (-208.9467, 20.7936) projected
  arc A50 (-208.9467, 20.7936) -> (-209.5764, 17.3574) centre (-105.17, 0) ccw projected
  line L51 (-209.5764, 17.3574) -> (-207.4768, 16.0541) projected
  arc A51 (-208.3459, 8.896) -> (-207.4768, 16.0541) centre (-209.5732, 12.6768) ccw projected
  line L52 (-208.3459, 8.896) -> (-210.6965, 8.1331) projected
  arc A52 (-210.6965, 8.1331) -> (-210.9074, 4.646) centre (-105.17, 0) ccw projected
  line L53 (-210.9074, 4.646) -> (-208.666, 3.6053) projected
  arc A53 (-208.666, -3.6053) -> (-208.666, 3.6053) centre (-210.34, 0) ccw projected
  line L54 (-208.666, -3.6053) -> (-210.9074, -4.646) projected
  arc A54 (-210.9074, -4.646) -> (-210.6965, -8.1331) centre (-105.17, 0) ccw projected
  line L55 (-210.6965, -8.1331) -> (-208.3459, -8.896) projected
  arc A55 (-207.4768, -16.0541) -> (-208.3459, -8.896) centre (-209.5732, -12.6768) ccw projected
  line L56 (-207.4768, -16.0541) -> (-209.5764, -17.3574) projected
  arc A56 (-209.5764, -17.3574) -> (-208.9467, -20.7936) centre (-105.17, 0) ccw projected
  line L57 (-208.9467, -20.7936) -> (-206.5214, -21.2677) projected
  arc A57 (-204.7958, -28.2688) -> (-206.5214, -21.2677) centre (-207.284, -25.1688) ccw projected
  line L58 (-204.7958, -28.2688) -> (-206.723, -29.8157) projected
  arc A58 (-206.723, -29.8157) -> (-205.6837, -33.1509) centre (-105.17, 0) ccw projected
  line L59 (-205.6837, -33.1509) -> (-203.2189, -33.3292) projected
  arc A59 (-200.662, -40.0712) -> (-203.2189, -33.3292) centre (-203.5057, -37.2938) ccw projected
  line L60 (-200.662, -40.0712) -> (-202.3887, -41.8391) projected
  arc A60 (-202.3887, -41.8391) -> (-200.9549, -45.0247) centre (-105.17, 0) ccw projected
  line L61 (-200.9549, -45.0247) -> (-198.4866, -44.9046) projected
  arc A61 (-195.1357, -51.2893) -> (-198.4866, -44.9046) centre (-198.2934, -48.8749) ccw projected
  line L62 (-195.1357, -51.2893) -> (-196.6367, -53.2525) projected
  arc A62 (-196.6367, -53.2525) -> (-194.8294, -56.2421) centre (-105.17, 0) ccw projected
  line L63 (-194.8294, -56.2421) -> (-192.3936, -55.8253) projected
  arc A63 (-188.2975, -61.7595) -> (-192.3936, -55.8253) centre (-191.7232, -59.7434) ccw projected
  line L64 (-188.2975, -61.7595) -> (-189.5509, -63.8893) projected
  arc A64 (-189.5509, -63.8893) -> (-187.3965, -66.6392) centre (-105.17, 0) ccw projected
  line L65 (-187.3965, -66.6392) -> (-185.0286, -65.9319) projected
  arc A65 (-180.2471, -71.3291) -> (-185.0286, -65.9319) centre (-183.8909, -69.7406) ccw projected
  line L66 (-180.2471, -71.3291) -> (-181.2347, -73.5945) projected
  arc A66 (-181.2347, -73.5945) -> (-178.7645, -76.0647) centre (-105.17, 0) ccw projected
  line L67 (-178.7645, -76.0647) -> (-176.4991, -75.0771) projected
  arc A67 (-171.1019, -79.8586) -> (-176.4991, -75.0771) centre (-174.9106, -78.7209) ccw projected
  line L68 (-171.1019, -79.8586) -> (-171.8092, -82.2265) projected
  arc A68 (-171.8092, -82.2265) -> (-169.0593, -84.3809) centre (-105.17, 0) ccw projected
  line L69 (-169.0593, -84.3809) -> (-166.9295, -83.1275) projected
  arc A69 (-160.9953, -87.2236) -> (-166.9295, -83.1275) centre (-164.9134, -86.5532) ccw projected
  line L70 (-160.9953, -87.2236) -> (-161.4121, -89.6594) projected
  arc A70 (-161.4121, -89.6594) -> (-158.4225, -91.4667) centre (-105.17, 0) ccw projected
  line L71 (-158.4225, -91.4667) -> (-156.4593, -89.9657) projected
  arc A71 (-150.0746, -93.3166) -> (-156.4593, -89.9657) centre (-154.0449, -93.1234) ccw projected
  line L72 (-150.0746, -93.3166) -> (-150.1947, -95.7849) projected
  arc A72 (-150.1947, -95.7849) -> (-147.0091, -97.2187) centre (-105.17, 0) ccw projected
  line L73 (-147.0091, -97.2187) -> (-145.2412, -95.492) projected
  arc A73 (-138.4992, -98.0489) -> (-145.2412, -95.492) centre (-142.4638, -98.3357) ccw projected
  line L74 (-138.4992, -98.0489) -> (-138.3209, -100.5137) projected
  arc A74 (-138.3209, -100.5137) -> (-134.9857, -101.553) centre (-105.17, 0) ccw projected
  line L75 (-134.9857, -101.553) -> (-133.4388, -99.6258) projected
  arc A75 (-126.4377, -101.3514) -> (-133.4388, -99.6258) centre (-130.3388, -102.114) ccw projected
  line L76 (-126.4377, -101.3514) -> (-125.9636, -103.7767) projected
  arc A76 (-125.9636, -103.7767) -> (-122.5274, -104.4064) centre (-105.17, 0) ccw projected
  line L77 (-122.5274, -104.4064) -> (-121.2241, -102.3068) projected
  arc A77 (-114.066, -103.1759) -> (-121.2241, -102.3068) centre (-117.8468, -104.4032) ccw projected
  line L78 (-114.066, -103.1759) -> (-113.3031, -105.5265) projected
  arc A78 (-113.3031, -105.5265) -> (-109.816, -105.7374) centre (-105.17, 0) ccw projected
  line L79 (-109.816, -105.7374) -> (-108.7753, -103.496) projected
  arc A79 (-101.5647, -103.496) -> (-108.7753, -103.496) centre (-105.17, -105.17) ccw projected
  line L80 (-101.5647, -103.496) -> (-100.524, -105.7374) projected
  arc A80 (-100.524, -105.7374) -> (-97.0369, -105.5265) centre (-105.17, 0) ccw projected
  line L81 (-97.0369, -105.5265) -> (-96.274, -103.1759) projected
  arc A81 (-89.1159, -102.3068) -> (-96.274, -103.1759) centre (-92.4932, -104.4032) ccw projected
  line L82 (-89.1159, -102.3068) -> (-87.8126, -104.4064) projected
  arc A82 (-87.8126, -104.4064) -> (-84.3764, -103.7767) centre (-105.17, 0) ccw projected
  line L83 (-84.3764, -103.7767) -> (-83.9023, -101.3514) projected
  arc A83 (-76.9012, -99.6258) -> (-83.9023, -101.3514) centre (-80.0012, -102.114) ccw projected
  line L84 (-76.9012, -99.6258) -> (-75.3543, -101.553) projected
  arc A84 (-75.3543, -101.553) -> (-72.0191, -100.5137) centre (-105.17, 0) ccw projected
  line L85 (-72.0191, -100.5137) -> (-71.8408, -98.0489) projected
  arc A85 (-65.0988, -95.492) -> (-71.8408, -98.0489) centre (-67.8762, -98.3357) ccw projected
  line L86 (-65.0988, -95.492) -> (-63.3309, -97.2187) projected
  arc A86 (-63.3309, -97.2187) -> (-60.1453, -95.7849) centre (-105.17, 0) ccw projected
  line L87 (-60.1453, -95.7849) -> (-60.2654, -93.3166) projected
  arc A87 (-53.8807, -89.9657) -> (-60.2654, -93.3166) centre (-56.2951, -93.1234) ccw projected
  line L88 (-53.8807, -89.9657) -> (-51.9175, -91.4667) projected
  arc A88 (-51.9175, -91.4667) -> (-48.9279, -89.6594) centre (-105.17, 0) ccw projected
  line L89 (-48.9279, -89.6594) -> (-49.3447, -87.2236) projected
  arc A89 (-43.4105, -83.1275) -> (-49.3447, -87.2236) centre (-45.4266, -86.5532) ccw projected
  line L90 (-43.4105, -83.1275) -> (-41.2807, -84.3809) projected
  arc A90 (-41.2807, -84.3809) -> (-38.5308, -82.2265) centre (-105.17, 0) ccw projected
  line L91 (-38.5308, -82.2265) -> (-39.2381, -79.8586) projected
  arc A91 (-33.8409, -75.0771) -> (-39.2381, -79.8586) centre (-35.4294, -78.7209) ccw projected
  line L92 (-33.8409, -75.0771) -> (-31.5755, -76.0647) projected
  arc A92 (-31.5755, -76.0647) -> (-29.1053, -73.5945) centre (-105.17, 0) ccw projected
  line L93 (-29.1053, -73.5945) -> (-30.0929, -71.3291) projected
  arc A93 (-25.3114, -65.9319) -> (-30.0929, -71.3291) centre (-26.4491, -69.7406) ccw projected
  line L94 (-25.3114, -65.9319) -> (-22.9435, -66.6392) projected
  arc A94 (-22.9435, -66.6392) -> (-20.7891, -63.8893) centre (-105.17, 0) ccw projected
  line L95 (-20.7891, -63.8893) -> (-22.0425, -61.7595) projected
  arc A95 (-17.9464, -55.8253) -> (-22.0425, -61.7595) centre (-18.6168, -59.7434) ccw projected
  line L96 (-17.9464, -55.8253) -> (-15.5106, -56.2421) projected
  arc A96 (-15.5106, -56.2421) -> (-13.7033, -53.2525) centre (-105.17, 0) ccw projected
  line L97 (-13.7033, -53.2525) -> (-15.2043, -51.2893) projected
  arc A97 (-11.8534, -44.9046) -> (-15.2043, -51.2893) centre (-12.0466, -48.8749) ccw projected
  line L98 (-11.8534, -44.9046) -> (-9.3851, -45.0247) projected
  arc A98 (-9.3851, -45.0247) -> (-7.9513, -41.8391) centre (-105.17, 0) ccw projected
  line L99 (-7.9513, -41.8391) -> (-9.678, -40.0712) projected
  arc A99 (-7.1211, -33.3292) -> (-9.678, -40.0712) centre (-6.8343, -37.2938) ccw projected
  line L100 (-7.1211, -33.3292) -> (-4.6563, -33.1509) projected
  arc A100 (-4.6563, -33.1509) -> (-3.617, -29.8157) centre (-105.17, 0) ccw projected
  line L101 (-3.617, -29.8157) -> (-5.5442, -28.2688) projected
  arc A101 (-3.8186, -21.2677) -> (-5.5442, -28.2688) centre (-3.056, -25.1688) ccw projected
  line L102 (-3.8186, -21.2677) -> (-1.3933, -20.7936) projected
  arc A102 (-1.3933, -20.7936) -> (-0.7636, -17.3574) centre (-105.17, 0) ccw projected
  line L103 (-0.7636, -17.3574) -> (-2.8632, -16.0541) projected
  arc A103 (-1.9941, -8.896) -> (-2.8632, -16.0541) centre (-0.7668, -12.6768) ccw projected
  circle A104 centre (-105.17, 0) radius 8.5 projected
  circle A105 centre (-105.17, 0) radius 8.5 projected
  line L104 (-105.1559, -17.7) -> (-105.1559, -15.7)
  arc A106 (-102.5059, -17.4984) -> (-107.8059, -17.5026) centre (-105.1551, -18.5504) ccw
  line L105 (-107.8059, -17.1739) -> (-107.8059, -18.2261) construction
  line L106 (-102.5059, -18.2261) -> (-102.5059, -17.1739) construction
  line L107 (-107.8059, -18.2261) -> (-102.5059, -18.2261) construction
  line L108 (-107.8059, -17.1739) -> (-102.5059, -18.2261) construction
  line L109 (-102.5059, -17.1739) -> (-107.8059, -18.2261) construction
  line L110 (-102.5059, -17.1739) -> (-107.8059, -17.1739) construction
  arc A107 (-121.6561, 6.442) -> (-119.0098, 11.0341) centre (-121.2426, 9.2623) ccw
  arc A108 (-107.8341, 17.4984) -> (-102.5341, 17.5026) centre (-105.1849, 18.5504) ccw
  arc A109 (-91.348, 11.0563) -> (-88.6943, 6.4685) centre (-89.1123, 9.2881) ccw
  arc A110 (-88.6839, -6.442) -> (-91.3302, -11.0341) centre (-89.0974, -9.2623) ccw
  arc A111 (-118.992, -11.0563) -> (-121.6457, -6.4685) centre (-121.2277, -9.2881) ccw
  circle A112 centre (-105.17, 0) radius 20
  circle A113 centre (-105.17, 0) radius 17.7
  circle A114 centre (-105.17, 0) radius 8.5
  circle A115 centre (-105.17, 0) radius 24.5
  circle A116 centre (-105.17, 0) radius 23
  circle A117 centre (-105.17, 0) radius 24.5
  circle A118 centre (-105.17, 0) radius 22.5
  point P0 (-118.7736, 7.8378)
  point P1 (-105.1841, 15.7)
  point P2 (-91.5804, 7.8622)
  point P3 (-91.5664, -7.8378)
  point P4 (-118.7596, -7.8622)
  point P5 (-91.3302, -11.0341)
  point P6 (-88.6839, -6.442)
  point P7 (-88.6943, 6.4685)
  point P8 (-91.348, 11.0563)
  point P9 (-102.5341, 17.5026)
  point P10 (-107.8341, 17.4984)
  point P11 (-119.0098, 11.0341)
  point P12 (-121.6561, 6.442)
  point P13 (-121.6457, -6.4685)
  dimension "d20" = 35.4
  dimension "d21" = 2
  dimension "d22" = 5.3
  dimension "d23" = 360
  dimension "d24" = 40
  dimension "d25" = 49
  dimension "d26" = 46
  dimension "d29" = 2
extrude "押し出し2" cut sketch "スケッチ4" against normal through all contours A106 A113 A111 A107 A108 A109 A110
sketch "スケッチ5" plane through (3.2, 18.9574, -103.4473) normal (1, 0, 0) x (0, 0.180255, -0.9836199)
  circle A0 centre (-107.7065, 69.9311) radius 15
  circle A1 centre (-105.17, 0) radius 90
  circle A2 centre (-105.17, 0) radius 30
  dimension "d30" = 30
  dimension "d31" = 180
  dimension "d32" = 60
extrude "押し出し3" cut sketch "スケッチ5" against normal blind 0.4
extrude "押し出し4" cut sketch "スケッチ5" against normal through all contours A0
pattern_circular "円形状パターン1" count 6 over 360 about axis through (3.2, 0, 0) along (-1, 0, 0) of "押し出し4"
sketch "スケッチ6" plane through (2.8, 0, 0) normal (1, 0, 0) x (0, 0, -1)
  circle A0 centre (-15.1004, 68.3284) radius 15 projected
  circle A1 centre (-66.7243, 21.0869) radius 15 projected
  line L0 (-66.7243, 21.0869) -> (-15.1004, 68.3284)
  circle A2 centre (-31.4807, 34.4011) radius 10
  point P0 (0, 0)
  dimension "d40" = 20
extrude "押し出し5" cut sketch "スケッチ6" against normal through all contours A2
pattern_circular "円形状パターン2" count 6 over 360 about axis through (3.2, 0, 0) along (-1, 0, 0) of "押し出し5"
sketch "スケッチ7" plane through (2.8, 0, 0) normal (1, 0, 0) x (0, 0, -1)
  circle A0 centre (0, 0) radius 34.0862
  circle A1 centre (0, 0) radius 115.853
extrude "押し出し6" cut sketch "スケッチ7" along normal mid plane 10
properties part number "KANA40A52D17_6-D25_PCD124.6(H 7 D 0/+0.1 25 N/A)"
